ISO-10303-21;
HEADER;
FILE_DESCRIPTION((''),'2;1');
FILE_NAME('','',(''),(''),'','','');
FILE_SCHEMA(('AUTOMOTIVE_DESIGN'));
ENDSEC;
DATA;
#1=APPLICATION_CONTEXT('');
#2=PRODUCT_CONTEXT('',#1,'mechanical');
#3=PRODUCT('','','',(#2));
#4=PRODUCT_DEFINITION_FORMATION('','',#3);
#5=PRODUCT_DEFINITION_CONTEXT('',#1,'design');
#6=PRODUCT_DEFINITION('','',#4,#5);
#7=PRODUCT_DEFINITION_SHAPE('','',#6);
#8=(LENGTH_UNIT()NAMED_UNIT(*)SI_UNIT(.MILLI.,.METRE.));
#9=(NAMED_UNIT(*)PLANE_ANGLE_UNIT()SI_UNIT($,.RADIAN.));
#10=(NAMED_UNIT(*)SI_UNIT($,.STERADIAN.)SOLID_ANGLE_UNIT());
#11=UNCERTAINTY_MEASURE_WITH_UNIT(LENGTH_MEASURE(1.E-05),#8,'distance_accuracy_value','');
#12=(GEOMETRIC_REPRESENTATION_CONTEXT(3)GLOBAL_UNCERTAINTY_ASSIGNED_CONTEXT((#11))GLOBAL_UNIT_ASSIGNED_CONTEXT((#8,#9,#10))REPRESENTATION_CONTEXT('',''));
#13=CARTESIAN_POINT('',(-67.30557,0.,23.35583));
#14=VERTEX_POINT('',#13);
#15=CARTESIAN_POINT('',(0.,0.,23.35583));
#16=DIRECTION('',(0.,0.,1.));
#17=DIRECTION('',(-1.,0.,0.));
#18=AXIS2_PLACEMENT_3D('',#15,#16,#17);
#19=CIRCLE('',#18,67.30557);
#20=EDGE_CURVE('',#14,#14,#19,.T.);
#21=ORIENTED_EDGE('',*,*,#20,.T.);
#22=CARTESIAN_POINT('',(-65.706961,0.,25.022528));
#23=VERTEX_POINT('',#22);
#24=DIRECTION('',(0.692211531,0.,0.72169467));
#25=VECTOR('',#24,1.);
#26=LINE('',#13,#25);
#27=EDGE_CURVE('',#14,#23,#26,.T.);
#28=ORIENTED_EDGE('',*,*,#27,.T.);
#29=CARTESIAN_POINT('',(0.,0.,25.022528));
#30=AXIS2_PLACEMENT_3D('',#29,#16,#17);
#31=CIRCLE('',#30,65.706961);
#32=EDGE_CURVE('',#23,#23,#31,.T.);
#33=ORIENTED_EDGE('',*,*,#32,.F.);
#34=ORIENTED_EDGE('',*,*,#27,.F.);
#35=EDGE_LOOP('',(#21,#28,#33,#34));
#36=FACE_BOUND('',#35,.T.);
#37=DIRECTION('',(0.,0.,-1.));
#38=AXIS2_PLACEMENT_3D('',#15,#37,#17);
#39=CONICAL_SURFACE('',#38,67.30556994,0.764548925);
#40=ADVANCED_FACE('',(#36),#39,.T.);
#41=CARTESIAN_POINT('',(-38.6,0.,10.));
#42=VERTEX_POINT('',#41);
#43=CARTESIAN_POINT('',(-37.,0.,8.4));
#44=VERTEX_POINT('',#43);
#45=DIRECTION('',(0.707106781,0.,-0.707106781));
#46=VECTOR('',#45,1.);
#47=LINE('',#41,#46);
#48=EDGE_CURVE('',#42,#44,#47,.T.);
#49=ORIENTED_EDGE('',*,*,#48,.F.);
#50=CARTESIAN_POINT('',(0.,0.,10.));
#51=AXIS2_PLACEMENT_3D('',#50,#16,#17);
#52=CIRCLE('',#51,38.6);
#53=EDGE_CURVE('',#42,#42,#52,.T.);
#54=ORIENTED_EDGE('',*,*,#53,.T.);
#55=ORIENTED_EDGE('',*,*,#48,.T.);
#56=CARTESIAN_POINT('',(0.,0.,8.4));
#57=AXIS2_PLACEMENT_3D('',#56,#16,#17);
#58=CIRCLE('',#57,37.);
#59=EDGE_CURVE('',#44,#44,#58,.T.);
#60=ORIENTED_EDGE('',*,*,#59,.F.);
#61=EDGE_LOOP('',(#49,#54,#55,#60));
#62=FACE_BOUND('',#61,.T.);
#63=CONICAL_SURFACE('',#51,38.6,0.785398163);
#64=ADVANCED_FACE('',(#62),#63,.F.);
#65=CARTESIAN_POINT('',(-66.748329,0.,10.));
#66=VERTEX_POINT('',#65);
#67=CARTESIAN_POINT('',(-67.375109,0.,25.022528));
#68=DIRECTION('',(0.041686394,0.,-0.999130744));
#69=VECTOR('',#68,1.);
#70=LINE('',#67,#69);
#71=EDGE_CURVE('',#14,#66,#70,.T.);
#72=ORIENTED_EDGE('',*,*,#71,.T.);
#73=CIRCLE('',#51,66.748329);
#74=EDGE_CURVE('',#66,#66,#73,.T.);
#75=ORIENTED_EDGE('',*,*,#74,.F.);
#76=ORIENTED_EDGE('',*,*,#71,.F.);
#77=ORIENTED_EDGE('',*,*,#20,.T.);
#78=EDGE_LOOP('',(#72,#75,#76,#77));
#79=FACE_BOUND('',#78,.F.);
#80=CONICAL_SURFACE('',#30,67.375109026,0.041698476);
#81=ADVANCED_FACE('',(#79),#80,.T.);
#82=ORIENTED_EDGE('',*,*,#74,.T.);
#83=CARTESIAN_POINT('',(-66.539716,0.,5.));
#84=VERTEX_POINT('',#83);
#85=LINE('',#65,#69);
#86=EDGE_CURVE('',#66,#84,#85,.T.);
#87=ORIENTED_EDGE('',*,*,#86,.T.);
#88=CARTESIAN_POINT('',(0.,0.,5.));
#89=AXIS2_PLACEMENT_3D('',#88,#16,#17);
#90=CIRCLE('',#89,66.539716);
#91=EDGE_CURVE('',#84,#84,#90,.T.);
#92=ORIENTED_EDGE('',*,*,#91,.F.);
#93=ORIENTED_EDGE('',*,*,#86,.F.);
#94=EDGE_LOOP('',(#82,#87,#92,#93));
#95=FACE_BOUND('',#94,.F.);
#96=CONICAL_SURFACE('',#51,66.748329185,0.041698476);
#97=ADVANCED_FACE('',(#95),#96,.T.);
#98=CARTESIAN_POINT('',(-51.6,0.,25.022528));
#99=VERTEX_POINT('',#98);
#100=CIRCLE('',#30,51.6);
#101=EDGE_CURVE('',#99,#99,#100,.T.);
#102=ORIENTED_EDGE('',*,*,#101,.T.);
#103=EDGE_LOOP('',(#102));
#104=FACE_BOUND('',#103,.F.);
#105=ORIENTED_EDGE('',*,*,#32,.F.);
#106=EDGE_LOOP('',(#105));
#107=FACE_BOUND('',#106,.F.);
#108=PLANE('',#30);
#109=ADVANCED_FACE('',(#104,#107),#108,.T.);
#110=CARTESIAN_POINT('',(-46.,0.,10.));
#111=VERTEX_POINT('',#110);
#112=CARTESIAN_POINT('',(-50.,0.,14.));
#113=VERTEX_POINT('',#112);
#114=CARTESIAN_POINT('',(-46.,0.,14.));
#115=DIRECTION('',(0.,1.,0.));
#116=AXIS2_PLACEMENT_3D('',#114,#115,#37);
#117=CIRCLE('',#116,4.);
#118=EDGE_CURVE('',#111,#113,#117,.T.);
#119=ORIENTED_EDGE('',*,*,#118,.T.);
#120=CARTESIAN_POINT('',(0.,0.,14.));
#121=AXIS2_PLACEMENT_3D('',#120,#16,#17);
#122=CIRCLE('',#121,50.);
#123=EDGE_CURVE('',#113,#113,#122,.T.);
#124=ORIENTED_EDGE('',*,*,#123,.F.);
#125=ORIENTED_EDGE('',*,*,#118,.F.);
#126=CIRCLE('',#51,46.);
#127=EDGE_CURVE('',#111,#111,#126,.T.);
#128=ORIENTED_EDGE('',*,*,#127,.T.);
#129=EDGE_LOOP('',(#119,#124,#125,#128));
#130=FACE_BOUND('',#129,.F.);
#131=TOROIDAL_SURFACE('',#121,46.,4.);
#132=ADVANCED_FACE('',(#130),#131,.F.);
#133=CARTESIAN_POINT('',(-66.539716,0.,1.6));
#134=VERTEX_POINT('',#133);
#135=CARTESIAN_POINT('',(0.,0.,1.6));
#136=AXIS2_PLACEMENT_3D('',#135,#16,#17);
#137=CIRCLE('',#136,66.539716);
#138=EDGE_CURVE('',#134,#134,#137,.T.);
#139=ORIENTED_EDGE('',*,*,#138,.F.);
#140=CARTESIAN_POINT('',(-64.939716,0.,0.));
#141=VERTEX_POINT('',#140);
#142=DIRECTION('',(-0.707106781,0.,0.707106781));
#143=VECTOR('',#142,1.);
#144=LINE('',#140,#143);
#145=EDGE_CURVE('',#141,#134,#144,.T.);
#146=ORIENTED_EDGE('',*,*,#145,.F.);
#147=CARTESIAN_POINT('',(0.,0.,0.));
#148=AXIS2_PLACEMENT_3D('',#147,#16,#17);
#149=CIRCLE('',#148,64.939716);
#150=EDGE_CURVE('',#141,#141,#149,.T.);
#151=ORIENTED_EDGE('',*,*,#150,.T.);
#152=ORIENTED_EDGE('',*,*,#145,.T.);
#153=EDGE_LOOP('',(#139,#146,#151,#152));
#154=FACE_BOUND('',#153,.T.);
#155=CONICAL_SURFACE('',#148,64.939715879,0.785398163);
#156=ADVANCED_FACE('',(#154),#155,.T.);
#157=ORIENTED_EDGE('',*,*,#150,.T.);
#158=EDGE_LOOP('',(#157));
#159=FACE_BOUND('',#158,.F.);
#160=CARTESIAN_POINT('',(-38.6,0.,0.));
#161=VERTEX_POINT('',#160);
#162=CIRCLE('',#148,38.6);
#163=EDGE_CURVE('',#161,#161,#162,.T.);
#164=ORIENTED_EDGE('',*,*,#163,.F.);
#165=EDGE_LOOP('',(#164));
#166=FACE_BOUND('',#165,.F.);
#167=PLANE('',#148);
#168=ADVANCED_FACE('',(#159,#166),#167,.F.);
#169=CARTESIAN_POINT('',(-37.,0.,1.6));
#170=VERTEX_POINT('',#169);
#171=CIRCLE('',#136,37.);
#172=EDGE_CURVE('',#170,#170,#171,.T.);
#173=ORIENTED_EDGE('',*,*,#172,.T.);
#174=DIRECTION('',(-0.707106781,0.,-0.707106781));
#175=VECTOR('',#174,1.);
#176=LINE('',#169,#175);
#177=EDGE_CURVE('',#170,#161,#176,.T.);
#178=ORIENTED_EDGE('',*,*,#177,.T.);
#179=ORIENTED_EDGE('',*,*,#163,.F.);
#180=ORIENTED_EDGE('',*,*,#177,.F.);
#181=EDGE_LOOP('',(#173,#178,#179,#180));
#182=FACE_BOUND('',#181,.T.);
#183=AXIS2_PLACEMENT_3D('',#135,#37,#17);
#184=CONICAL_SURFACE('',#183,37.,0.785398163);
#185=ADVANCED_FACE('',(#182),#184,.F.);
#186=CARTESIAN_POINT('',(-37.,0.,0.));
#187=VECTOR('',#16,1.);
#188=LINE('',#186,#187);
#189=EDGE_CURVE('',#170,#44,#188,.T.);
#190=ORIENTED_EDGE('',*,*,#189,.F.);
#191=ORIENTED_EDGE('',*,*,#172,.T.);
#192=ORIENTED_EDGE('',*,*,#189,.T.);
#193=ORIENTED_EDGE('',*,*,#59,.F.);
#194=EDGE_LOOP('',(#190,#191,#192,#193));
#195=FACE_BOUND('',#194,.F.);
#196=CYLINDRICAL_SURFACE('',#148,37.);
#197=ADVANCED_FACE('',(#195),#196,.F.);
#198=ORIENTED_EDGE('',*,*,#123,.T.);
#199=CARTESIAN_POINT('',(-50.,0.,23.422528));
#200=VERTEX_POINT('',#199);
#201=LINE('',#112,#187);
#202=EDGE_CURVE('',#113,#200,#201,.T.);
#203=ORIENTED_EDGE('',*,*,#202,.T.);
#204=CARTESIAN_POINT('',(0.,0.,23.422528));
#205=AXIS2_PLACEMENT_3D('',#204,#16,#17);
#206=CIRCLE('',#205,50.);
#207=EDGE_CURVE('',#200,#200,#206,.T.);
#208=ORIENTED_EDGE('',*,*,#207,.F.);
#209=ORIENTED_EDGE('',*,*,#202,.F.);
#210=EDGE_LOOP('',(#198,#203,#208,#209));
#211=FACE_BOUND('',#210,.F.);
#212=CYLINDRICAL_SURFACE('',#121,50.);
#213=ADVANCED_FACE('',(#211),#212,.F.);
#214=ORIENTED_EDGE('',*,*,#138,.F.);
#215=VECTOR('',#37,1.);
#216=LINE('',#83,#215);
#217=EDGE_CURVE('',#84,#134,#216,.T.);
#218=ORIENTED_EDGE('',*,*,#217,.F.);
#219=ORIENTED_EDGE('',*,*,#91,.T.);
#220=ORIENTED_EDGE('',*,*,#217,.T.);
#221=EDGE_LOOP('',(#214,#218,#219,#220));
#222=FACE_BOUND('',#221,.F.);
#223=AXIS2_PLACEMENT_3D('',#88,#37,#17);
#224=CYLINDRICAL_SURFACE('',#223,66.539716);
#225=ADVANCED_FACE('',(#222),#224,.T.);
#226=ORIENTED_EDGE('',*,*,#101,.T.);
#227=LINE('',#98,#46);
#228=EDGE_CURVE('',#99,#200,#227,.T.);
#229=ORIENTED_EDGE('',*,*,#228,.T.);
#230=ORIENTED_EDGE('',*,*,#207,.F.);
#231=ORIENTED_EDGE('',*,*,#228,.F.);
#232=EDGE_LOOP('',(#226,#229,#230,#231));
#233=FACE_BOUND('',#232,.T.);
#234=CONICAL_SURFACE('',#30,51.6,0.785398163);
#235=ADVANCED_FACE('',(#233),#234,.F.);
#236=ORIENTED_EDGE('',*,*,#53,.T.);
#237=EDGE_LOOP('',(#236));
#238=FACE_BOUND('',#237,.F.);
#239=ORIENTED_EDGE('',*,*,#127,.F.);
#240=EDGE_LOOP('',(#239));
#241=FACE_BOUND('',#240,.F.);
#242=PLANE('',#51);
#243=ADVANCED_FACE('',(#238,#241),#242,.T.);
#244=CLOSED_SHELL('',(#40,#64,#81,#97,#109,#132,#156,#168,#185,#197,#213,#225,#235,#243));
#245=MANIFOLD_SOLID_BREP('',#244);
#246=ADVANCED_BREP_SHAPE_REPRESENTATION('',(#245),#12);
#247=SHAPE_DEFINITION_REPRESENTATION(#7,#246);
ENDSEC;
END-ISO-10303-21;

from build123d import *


# Not quite as in the source:
# - a fillet or chamfer that OpenCascade refuses, or shapes differently, is made with other operations: its cross-section is extruded or revolved along the edge and cut away or added


with BuildPart() as f1:
    # F0 (on Front) → F1 (revolve)
    with BuildSketch(Plane.XZ):
        with BuildLine():
            Line((-66.7483291848, 10), (-66.5397158787, 5))
            Line((-66.5397158787, 5), (-66.5397158787, 0))
            Line((-66.5397158787, 0), (-37, 0))
            Line((-37, 0), (-37, 10))
            Line((-37, 10), (-46, 10))
            ThreePointArc((-46, 10), (-48.8284271247, 11.1715728753), (-50, 14))
            Line((-50, 14), (-50, 25.0225278729))
            Line((-50, 25.0225278729), (-67.375109026, 25.0225278729))
            Line((-67.375109026, 25.0225278729), (-66.7483291848, 10))
        make_face()
    revolve(axis=Axis((0, 0, 30.7617206126), (0, 0, 1)))

    # F2: chamfer of 1.6 on 5 edges, made by hand

    # F2_s1 → F2_t2 (revolve, cut)
    with BuildSketch(Plane.XZ):
        Polygon((-38.6, 10), (-37, 8.4), (-37, 10), align=None)
    revolve(axis=Axis((0, 0, 10), (0, 0, 1)), mode=Mode.SUBTRACT)

    # F2_s3 → F2_t4 (revolve, cut)
    with BuildSketch(Plane.XZ):
        Polygon((-37, 1.6), (-38.6, 0), (-37, 0), align=None)
    revolve(axis=Axis((0, 0, 0), (0, 0, 1)), mode=Mode.SUBTRACT)

    # F2_s5 → F2_t6 (revolve, cut)
    with BuildSketch(Plane.XZ):
        Polygon((-64.9397158787, 0), (-66.5397158787, 1.6), (-66.5397158787, 0), align=None)
    revolve(axis=Axis((0, 0, 0), (0, 0, 1)), mode=Mode.SUBTRACT)

    # F2_s7 → F2_t8 (revolve, cut)
    with BuildSketch(Plane.XZ):
        Polygon((-51.6, 25.0225278729), (-50, 23.4225278729), (-50, 25.0225278729), align=None)
    revolve(axis=Axis((0, 0, 25.0225278729), (0, 0, 1)), mode=Mode.SUBTRACT)

    # F2_s9 → F2_t10 (revolve, cut)
    with BuildSketch(Plane.XZ):
        Polygon((-67.3055699404, 23.3558296431), (-65.7069607492, 25.0225278729), (-67.375109026, 25.0225278729), align=None)
    revolve(axis=Axis((0, 0, 25.0225278729), (0, 0, 1)), mode=Mode.SUBTRACT)


solid = f1.part
